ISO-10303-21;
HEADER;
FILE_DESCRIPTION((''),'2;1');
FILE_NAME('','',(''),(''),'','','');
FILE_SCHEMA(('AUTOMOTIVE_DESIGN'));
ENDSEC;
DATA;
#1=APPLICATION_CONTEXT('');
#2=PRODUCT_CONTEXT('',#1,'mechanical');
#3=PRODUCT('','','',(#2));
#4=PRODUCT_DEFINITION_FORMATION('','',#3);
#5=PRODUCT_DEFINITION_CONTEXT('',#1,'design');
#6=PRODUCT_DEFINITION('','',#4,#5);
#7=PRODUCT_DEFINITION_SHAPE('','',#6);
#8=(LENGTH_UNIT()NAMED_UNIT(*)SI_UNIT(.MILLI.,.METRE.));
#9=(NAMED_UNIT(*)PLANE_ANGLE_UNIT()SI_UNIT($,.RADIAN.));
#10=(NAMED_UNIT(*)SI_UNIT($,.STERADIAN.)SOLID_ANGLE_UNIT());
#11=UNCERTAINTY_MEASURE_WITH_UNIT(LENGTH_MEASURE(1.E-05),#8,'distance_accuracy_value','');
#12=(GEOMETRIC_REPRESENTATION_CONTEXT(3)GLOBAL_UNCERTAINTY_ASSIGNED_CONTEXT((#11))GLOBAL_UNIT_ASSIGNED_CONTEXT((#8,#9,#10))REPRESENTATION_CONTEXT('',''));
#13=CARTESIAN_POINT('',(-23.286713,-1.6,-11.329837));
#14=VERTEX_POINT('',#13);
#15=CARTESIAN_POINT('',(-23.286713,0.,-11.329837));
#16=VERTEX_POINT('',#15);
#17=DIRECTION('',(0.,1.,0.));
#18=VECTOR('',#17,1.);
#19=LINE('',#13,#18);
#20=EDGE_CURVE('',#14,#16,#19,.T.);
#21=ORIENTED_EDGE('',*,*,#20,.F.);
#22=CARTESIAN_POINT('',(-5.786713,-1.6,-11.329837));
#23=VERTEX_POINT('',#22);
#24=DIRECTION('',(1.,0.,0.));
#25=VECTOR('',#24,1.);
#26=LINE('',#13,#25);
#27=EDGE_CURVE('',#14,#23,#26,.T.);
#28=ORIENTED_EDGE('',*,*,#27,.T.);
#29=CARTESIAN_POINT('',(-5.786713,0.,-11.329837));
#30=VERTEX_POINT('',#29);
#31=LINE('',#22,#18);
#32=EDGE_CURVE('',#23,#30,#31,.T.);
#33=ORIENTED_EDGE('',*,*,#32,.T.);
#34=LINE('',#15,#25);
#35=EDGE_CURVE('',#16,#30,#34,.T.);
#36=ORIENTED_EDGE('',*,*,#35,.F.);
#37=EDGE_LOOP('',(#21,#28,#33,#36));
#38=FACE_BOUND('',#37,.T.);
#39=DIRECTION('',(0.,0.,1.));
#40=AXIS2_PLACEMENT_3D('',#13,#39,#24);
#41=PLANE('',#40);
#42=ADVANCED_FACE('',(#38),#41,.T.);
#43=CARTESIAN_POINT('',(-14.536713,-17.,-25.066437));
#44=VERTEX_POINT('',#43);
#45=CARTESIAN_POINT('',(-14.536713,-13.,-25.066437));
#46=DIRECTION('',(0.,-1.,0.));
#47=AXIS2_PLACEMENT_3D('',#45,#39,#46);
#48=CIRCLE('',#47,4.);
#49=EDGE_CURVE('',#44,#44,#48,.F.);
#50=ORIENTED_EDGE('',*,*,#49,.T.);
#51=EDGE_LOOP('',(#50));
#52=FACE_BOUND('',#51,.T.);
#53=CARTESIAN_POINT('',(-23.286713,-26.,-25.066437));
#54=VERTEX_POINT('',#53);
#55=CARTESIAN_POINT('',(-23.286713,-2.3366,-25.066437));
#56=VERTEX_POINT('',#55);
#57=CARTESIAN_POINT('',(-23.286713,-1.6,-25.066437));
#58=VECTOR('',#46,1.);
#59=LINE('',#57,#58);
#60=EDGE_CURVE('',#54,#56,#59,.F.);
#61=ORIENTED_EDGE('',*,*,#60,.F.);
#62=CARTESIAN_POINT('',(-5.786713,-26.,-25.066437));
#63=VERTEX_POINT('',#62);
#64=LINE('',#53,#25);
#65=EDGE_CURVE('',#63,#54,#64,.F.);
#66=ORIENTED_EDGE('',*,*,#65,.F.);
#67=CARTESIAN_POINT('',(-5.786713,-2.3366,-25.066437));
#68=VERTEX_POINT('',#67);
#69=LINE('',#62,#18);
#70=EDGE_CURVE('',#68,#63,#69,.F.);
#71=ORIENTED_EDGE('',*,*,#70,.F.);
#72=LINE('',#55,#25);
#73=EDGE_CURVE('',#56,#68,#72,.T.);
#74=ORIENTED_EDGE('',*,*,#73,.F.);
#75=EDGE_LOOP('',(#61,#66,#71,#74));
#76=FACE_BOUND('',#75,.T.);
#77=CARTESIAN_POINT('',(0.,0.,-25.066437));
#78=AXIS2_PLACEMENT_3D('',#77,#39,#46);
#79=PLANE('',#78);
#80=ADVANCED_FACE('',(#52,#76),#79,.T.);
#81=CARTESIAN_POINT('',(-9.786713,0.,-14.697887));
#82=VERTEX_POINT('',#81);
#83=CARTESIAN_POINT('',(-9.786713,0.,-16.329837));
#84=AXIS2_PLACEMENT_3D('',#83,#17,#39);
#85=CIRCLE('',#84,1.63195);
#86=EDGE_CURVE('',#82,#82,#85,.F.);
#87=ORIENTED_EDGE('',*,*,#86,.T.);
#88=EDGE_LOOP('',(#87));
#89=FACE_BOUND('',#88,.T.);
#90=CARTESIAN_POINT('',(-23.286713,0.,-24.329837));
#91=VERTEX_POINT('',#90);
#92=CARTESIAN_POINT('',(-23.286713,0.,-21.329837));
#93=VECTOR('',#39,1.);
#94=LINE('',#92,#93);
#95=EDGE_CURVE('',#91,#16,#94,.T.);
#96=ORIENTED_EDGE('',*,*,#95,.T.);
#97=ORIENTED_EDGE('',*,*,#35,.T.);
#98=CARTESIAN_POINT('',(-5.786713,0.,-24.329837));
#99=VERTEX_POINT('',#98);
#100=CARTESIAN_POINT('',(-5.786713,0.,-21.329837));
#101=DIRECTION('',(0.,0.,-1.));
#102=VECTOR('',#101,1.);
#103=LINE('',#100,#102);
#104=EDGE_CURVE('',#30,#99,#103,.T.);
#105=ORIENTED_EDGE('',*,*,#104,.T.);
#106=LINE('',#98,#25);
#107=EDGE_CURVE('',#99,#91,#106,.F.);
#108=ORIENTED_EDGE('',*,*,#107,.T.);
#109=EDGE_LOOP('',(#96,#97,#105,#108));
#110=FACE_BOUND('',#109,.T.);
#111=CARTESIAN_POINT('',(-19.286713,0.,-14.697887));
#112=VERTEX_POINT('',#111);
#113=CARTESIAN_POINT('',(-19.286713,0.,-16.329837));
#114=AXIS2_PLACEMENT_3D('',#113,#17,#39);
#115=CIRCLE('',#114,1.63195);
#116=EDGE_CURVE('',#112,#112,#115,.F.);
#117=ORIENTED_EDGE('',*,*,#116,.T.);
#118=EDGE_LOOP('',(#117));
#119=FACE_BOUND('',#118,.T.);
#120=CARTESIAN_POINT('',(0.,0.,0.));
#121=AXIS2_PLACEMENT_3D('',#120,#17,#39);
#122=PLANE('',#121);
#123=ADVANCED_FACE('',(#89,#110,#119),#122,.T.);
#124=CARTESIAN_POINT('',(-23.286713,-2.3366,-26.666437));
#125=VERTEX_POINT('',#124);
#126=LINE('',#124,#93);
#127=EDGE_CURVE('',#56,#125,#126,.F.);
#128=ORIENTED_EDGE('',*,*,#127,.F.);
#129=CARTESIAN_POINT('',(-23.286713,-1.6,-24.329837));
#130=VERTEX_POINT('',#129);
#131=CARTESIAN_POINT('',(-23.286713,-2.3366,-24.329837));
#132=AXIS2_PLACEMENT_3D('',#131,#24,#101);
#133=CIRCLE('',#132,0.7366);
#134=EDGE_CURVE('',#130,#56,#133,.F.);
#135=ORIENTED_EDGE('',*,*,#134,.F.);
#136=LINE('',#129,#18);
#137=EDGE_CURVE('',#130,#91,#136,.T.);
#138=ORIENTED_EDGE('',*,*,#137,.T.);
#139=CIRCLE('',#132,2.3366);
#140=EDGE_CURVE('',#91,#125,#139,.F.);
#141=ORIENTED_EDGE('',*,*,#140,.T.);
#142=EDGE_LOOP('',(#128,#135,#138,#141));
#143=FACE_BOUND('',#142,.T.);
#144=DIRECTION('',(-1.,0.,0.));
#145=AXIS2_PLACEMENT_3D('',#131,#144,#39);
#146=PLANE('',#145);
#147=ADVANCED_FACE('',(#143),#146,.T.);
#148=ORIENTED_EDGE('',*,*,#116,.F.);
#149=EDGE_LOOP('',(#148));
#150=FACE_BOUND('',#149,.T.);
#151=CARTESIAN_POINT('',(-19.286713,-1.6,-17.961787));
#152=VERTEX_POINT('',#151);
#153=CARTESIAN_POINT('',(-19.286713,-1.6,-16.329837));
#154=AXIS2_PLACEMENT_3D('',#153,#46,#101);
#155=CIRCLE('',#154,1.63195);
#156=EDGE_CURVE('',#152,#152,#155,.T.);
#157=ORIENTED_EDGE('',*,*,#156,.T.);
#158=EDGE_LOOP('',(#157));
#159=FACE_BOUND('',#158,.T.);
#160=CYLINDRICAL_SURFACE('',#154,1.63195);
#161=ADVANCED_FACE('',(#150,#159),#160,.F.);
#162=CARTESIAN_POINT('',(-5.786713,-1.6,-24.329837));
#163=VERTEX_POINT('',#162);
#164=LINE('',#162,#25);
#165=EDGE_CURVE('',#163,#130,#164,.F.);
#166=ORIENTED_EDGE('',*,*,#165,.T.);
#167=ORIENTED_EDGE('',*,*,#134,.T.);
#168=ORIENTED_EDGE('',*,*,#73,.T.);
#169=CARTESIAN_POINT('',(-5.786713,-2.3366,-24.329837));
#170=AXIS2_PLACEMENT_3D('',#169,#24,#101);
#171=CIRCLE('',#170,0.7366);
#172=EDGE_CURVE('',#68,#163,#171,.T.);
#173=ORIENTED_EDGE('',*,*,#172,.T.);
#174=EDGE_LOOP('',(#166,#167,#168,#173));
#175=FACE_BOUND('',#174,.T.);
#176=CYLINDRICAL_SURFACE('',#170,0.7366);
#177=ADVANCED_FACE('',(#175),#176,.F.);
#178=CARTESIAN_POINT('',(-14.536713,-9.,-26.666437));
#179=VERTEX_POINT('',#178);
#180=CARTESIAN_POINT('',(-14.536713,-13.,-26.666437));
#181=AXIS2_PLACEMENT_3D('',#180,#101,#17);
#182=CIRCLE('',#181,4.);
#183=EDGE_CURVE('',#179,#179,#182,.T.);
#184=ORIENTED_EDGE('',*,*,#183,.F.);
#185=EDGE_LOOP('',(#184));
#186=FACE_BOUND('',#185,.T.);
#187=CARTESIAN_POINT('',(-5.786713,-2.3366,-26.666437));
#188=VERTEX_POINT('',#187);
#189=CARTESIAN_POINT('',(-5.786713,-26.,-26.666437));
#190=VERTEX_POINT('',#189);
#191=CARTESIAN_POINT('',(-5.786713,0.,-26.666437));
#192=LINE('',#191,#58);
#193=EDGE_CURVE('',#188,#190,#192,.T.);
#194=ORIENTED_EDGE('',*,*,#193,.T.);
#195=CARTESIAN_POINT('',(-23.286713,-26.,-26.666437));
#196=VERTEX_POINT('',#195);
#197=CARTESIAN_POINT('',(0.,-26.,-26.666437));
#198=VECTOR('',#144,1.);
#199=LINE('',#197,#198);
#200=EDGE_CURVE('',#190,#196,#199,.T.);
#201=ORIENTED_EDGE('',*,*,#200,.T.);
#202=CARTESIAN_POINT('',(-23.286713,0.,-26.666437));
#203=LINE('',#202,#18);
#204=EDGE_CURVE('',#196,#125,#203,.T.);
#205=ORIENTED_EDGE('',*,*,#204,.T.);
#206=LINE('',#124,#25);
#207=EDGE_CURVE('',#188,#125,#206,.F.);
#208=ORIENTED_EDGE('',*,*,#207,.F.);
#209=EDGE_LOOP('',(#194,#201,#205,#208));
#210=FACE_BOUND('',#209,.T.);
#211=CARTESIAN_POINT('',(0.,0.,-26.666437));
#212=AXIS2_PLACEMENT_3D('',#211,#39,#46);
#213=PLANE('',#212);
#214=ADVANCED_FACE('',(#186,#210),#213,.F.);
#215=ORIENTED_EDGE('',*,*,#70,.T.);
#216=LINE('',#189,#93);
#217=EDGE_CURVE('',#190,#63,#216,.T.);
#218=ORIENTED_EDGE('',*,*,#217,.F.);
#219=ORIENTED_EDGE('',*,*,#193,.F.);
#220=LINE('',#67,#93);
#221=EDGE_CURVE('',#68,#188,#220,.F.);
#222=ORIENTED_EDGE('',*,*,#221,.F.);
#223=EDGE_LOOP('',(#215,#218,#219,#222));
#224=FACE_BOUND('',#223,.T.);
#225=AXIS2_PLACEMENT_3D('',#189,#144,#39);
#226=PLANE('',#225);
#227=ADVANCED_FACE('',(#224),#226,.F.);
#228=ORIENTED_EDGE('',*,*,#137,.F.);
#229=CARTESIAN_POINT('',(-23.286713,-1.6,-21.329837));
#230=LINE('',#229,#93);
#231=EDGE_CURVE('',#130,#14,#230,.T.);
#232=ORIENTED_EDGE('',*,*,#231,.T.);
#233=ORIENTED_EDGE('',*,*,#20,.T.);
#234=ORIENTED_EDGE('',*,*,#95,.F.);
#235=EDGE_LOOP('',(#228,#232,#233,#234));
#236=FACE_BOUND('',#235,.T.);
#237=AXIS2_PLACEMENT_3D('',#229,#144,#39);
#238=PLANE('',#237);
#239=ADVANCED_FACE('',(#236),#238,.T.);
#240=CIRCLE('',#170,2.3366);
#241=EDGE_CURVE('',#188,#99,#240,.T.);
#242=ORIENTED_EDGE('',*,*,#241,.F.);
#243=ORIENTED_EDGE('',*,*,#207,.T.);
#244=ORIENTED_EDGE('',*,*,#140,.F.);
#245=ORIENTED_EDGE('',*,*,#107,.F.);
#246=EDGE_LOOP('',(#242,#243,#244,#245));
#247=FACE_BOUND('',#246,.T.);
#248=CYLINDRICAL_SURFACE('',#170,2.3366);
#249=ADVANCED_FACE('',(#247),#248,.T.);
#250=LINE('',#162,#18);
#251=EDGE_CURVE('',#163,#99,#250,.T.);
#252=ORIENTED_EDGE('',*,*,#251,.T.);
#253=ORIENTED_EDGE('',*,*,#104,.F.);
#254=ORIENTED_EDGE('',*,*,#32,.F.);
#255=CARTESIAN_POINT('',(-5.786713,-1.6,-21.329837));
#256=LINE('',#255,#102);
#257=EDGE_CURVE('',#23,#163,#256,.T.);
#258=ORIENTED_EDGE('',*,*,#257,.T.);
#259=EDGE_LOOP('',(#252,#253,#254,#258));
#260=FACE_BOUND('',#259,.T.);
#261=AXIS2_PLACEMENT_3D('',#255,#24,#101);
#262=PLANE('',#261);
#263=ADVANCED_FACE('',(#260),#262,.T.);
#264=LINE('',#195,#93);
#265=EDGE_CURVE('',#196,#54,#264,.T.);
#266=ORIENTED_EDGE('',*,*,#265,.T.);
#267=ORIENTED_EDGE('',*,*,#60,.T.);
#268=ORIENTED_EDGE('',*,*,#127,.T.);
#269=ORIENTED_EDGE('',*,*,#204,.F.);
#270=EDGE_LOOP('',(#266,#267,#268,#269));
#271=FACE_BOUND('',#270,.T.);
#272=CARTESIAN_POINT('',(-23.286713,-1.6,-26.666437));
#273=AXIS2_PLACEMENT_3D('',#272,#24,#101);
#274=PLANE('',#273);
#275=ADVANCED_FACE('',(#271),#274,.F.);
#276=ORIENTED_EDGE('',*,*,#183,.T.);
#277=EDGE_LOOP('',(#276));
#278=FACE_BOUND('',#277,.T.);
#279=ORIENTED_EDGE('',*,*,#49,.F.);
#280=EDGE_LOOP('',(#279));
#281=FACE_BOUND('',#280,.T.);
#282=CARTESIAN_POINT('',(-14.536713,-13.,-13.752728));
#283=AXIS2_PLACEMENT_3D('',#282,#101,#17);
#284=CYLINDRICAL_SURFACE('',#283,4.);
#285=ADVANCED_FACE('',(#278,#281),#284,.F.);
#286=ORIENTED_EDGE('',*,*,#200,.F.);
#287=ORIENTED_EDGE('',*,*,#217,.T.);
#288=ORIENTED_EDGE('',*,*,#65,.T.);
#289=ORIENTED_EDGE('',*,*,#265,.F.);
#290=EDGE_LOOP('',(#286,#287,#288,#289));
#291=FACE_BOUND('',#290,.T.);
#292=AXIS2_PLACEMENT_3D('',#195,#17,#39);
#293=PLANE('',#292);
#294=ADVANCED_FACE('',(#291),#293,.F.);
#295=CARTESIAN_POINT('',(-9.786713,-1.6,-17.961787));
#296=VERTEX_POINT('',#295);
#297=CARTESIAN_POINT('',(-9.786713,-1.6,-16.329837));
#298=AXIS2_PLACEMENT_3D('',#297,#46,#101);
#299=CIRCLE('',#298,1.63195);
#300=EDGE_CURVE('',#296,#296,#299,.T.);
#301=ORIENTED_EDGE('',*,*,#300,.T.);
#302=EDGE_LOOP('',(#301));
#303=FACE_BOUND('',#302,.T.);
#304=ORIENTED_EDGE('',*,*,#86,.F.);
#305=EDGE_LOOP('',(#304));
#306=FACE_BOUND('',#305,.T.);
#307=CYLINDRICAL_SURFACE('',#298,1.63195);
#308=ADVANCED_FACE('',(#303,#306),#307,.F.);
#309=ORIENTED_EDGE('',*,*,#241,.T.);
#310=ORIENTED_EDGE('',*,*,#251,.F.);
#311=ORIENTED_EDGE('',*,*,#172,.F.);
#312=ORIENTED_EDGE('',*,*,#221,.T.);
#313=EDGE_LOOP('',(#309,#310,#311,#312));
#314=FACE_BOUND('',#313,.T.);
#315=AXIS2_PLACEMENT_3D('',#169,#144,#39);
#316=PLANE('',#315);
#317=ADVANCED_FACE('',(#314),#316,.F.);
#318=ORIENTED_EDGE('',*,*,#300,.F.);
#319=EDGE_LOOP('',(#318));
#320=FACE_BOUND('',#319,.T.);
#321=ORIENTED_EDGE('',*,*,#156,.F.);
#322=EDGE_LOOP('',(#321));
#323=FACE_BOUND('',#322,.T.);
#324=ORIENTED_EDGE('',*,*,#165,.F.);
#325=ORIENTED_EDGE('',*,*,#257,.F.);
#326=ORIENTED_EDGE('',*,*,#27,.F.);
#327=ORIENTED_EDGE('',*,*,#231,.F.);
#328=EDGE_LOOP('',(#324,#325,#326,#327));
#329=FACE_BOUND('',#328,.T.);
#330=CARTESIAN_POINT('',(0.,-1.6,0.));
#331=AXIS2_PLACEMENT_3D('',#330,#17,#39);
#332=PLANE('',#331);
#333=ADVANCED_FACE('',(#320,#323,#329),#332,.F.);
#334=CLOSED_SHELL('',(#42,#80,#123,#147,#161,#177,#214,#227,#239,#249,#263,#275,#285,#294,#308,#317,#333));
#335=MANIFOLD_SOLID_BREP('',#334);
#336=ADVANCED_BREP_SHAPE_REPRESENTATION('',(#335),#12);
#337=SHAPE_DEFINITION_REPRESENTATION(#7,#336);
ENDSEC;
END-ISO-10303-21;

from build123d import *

# Parameters (mm, degrees)
SKETCH1_W                 = 17.5
SKETCH1_H                 = 10
BASE_FLANGE1_DEPTH        = 1.6
F_4_CLEARANCE_HOLE1_D     = 3.2639
F_4_CLEARANCE_HOLE1_DEPTH = 1.6
F_4_CLEARANCE_HOLE1_TIP   = 0.980574487
EDGE_FLANGE1_DEPTH        = 17.5
SKETCH20_R                = 4
CUT_EXTRUDE1_DEPTH        = 1.6


# Sheet-metal steps are written as plain solids
with BuildPart() as part:
    # Sketch1 → Base-Flange1 (new body)
    with BuildSketch(Plane(origin=(0, 0, 0), x_dir=(1, 0, 0), z_dir=(0, 1, 0))):
        with Locations((-14.536713287, 16.32983683)):
            Rectangle(SKETCH1_W, SKETCH1_H)
    extrude(amount=-BASE_FLANGE1_DEPTH)

    # #4 Clearance Hole1
    with Locations(Plane.XZ.offset(1.6)):
        with Locations((-9.786713287, -16.32983683), (-19.286713287, -16.32983683)):
            Hole(F_4_CLEARANCE_HOLE1_D / 2, depth=F_4_CLEARANCE_HOLE1_DEPTH)
            with Locations((0, 0, -(F_4_CLEARANCE_HOLE1_DEPTH + F_4_CLEARANCE_HOLE1_TIP / 2))):  # 118° drill point
                Cone(0, F_4_CLEARANCE_HOLE1_D / 2, F_4_CLEARANCE_HOLE1_TIP, mode=Mode.SUBTRACT)

    # Edge-Flange1 section (across the edge) → Edge-Flange1 (add)
    with BuildSketch(Plane(origin=(-23.286713287, -1.6, -25.06643683), x_dir=(0, 0, 1), z_dir=(1, 0, 0))):
        with BuildLine():
            Line((-1.6, 0.7366), (-1.6, 24.4))
            Line((-1.6, 24.4), (0, 24.4))
            Line((0, 24.4), (0, 0.7366))
            ThreePointArc((0, 0.7366), (0.215745145, 0.215745145), (0.7366, 0))
            Line((0.7366, 0), (3.7366, 0))
            Line((3.7366, 0), (3.7366, -1.6))
            Line((3.7366, -1.6), (0.7366, -1.6))
            ThreePointArc((0.7366, -1.6), (-0.915625705, -0.915625705), (-1.6, 0.7366))
        make_face()
    extrude(amount=EDGE_FLANGE1_DEPTH)

    # Sketch20 → Cut-Extrude1 (cut)
    with BuildSketch(Plane(origin=(0, 0, -26.66643683), x_dir=(-1, 0, 0), z_dir=(0, 0, -1))):
        with Locations(Location((14.536713287, -13, 0), (0, 0, 90))):
            Circle(SKETCH20_R)
    extrude(amount=-CUT_EXTRUDE1_DEPTH, mode=Mode.SUBTRACT)


solid = part.part
